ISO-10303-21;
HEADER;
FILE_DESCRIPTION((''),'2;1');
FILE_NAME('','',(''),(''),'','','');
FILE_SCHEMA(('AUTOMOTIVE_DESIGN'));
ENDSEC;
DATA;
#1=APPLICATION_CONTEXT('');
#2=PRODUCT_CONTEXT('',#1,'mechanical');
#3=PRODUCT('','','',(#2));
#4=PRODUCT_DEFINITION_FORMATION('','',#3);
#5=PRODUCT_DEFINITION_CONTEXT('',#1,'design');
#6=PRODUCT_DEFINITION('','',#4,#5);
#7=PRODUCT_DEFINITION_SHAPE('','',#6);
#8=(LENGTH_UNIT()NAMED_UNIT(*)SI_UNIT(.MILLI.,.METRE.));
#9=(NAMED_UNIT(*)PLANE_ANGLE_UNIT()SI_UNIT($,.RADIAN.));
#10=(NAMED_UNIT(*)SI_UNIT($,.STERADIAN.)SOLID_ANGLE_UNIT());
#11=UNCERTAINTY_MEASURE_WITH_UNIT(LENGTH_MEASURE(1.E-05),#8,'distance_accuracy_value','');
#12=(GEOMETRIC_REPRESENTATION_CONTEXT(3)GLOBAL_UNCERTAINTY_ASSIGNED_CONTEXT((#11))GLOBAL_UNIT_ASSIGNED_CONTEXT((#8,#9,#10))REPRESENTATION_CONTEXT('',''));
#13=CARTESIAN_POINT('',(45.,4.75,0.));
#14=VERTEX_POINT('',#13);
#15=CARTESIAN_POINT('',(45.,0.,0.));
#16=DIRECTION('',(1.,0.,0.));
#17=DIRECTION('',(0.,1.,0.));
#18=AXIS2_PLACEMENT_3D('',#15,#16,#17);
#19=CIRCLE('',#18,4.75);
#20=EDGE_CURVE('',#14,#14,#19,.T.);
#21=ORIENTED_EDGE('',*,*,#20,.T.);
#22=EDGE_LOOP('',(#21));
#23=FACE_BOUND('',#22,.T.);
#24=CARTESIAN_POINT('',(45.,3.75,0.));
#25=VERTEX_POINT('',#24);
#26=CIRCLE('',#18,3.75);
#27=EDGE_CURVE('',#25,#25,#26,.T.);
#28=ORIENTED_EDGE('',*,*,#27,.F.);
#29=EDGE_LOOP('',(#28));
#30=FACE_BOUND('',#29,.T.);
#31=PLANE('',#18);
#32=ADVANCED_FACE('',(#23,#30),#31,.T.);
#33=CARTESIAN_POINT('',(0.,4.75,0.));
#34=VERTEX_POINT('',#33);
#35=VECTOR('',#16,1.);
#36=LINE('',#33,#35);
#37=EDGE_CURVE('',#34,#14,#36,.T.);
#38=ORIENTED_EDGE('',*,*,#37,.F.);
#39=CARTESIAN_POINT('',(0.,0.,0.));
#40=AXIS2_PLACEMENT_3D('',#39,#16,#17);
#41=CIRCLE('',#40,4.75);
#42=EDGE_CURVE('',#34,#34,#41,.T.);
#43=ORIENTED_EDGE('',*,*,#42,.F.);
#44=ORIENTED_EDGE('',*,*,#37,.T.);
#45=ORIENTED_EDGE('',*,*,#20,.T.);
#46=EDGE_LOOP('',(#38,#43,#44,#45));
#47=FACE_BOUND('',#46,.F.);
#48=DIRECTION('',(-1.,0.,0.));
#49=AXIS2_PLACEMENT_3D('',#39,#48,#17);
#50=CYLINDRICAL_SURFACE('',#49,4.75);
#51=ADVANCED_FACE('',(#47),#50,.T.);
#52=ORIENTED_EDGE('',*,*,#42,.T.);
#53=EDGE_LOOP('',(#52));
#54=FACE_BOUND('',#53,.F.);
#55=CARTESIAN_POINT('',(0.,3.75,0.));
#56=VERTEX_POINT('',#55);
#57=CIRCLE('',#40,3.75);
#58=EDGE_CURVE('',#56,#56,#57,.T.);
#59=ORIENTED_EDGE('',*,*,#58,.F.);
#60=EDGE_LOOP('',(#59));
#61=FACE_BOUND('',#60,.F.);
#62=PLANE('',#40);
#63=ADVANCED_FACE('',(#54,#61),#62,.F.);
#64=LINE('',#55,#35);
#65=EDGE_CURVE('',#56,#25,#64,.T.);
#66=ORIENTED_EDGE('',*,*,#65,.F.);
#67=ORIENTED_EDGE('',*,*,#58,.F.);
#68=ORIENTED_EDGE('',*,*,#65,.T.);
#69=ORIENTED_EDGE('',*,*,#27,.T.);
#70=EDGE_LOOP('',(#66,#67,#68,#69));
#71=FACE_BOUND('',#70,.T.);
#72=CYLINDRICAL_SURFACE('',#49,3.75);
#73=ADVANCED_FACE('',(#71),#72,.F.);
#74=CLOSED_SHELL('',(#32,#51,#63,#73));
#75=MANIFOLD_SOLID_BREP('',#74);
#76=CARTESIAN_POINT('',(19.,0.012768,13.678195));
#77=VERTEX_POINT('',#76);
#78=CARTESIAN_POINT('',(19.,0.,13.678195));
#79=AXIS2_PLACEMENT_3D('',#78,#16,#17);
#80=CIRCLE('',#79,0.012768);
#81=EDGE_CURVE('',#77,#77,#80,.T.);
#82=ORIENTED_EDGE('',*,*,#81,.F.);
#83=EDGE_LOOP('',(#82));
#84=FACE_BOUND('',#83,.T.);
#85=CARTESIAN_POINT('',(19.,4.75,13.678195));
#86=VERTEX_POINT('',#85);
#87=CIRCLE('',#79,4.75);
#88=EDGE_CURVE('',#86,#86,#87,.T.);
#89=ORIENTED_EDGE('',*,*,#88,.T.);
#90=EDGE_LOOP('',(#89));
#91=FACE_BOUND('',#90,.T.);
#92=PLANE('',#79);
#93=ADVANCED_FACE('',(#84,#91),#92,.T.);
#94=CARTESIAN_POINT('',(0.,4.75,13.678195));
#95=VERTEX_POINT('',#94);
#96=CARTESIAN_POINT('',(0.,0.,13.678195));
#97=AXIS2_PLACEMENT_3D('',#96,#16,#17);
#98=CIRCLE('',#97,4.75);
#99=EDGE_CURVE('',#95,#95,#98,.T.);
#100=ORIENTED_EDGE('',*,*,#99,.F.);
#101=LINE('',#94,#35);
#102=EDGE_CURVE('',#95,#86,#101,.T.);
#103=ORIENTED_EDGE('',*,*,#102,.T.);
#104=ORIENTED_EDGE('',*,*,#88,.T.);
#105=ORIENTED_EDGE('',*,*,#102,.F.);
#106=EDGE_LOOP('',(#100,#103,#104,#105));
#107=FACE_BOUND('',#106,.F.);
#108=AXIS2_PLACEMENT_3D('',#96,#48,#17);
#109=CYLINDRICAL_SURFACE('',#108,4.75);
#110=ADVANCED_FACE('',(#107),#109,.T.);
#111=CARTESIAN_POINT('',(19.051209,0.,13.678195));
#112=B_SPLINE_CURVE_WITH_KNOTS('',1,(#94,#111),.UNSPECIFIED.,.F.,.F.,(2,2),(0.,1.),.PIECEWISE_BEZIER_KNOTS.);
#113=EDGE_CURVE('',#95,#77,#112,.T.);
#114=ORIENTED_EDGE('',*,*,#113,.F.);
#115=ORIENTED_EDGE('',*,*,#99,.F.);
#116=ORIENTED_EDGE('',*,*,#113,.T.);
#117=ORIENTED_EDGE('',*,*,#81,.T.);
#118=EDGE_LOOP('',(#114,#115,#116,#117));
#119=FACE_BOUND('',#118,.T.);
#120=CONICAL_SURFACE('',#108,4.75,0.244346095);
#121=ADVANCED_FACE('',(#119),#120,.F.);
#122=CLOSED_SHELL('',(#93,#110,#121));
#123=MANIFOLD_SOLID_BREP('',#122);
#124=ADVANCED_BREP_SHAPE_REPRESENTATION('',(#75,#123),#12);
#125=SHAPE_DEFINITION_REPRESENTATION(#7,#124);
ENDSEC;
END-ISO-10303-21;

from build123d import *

# Parameters (mm, degrees)
F0_R      = 4.75
F0_R_2    = 3.75
F1_DEPTH  = 45
F2_R      = 4.75
F3_DEPTH  = 19
F3_FACE_R = 4.75


# Not quite as in the source:
# - an extrude whose draft closes it to a point is written as a loft to that point


with BuildPart() as f1:
    # F0 (on Right) → F1 (new body)
    with BuildSketch(Plane.YZ):
        Circle(F0_R)
        Circle(F0_R_2, mode=Mode.SUBTRACT)
    extrude(amount=F1_DEPTH)


with BuildPart() as f3:
    # F2 (on Right) → F3 (new body)
    with BuildSketch(Plane.YZ):
        with Locations((0, 13.678194955)):
            Circle(F2_R)
    extrude(amount=F3_DEPTH)

    # F3_face (on face) → F4 section 0
    with BuildSketch(Plane(origin=(0, 0, 13.678194955), x_dir=(0, 1, 0), z_dir=(-1, 0, 0)), mode=Mode.PRIVATE) as f4_s0:
        Circle(F3_FACE_R)
    loft([f4_s0.sketch, Vertex(19.0512094343, 0, 13.678194955)], ruled=True, mode=Mode.SUBTRACT)


solid = Compound([f1.part, f3.part])
